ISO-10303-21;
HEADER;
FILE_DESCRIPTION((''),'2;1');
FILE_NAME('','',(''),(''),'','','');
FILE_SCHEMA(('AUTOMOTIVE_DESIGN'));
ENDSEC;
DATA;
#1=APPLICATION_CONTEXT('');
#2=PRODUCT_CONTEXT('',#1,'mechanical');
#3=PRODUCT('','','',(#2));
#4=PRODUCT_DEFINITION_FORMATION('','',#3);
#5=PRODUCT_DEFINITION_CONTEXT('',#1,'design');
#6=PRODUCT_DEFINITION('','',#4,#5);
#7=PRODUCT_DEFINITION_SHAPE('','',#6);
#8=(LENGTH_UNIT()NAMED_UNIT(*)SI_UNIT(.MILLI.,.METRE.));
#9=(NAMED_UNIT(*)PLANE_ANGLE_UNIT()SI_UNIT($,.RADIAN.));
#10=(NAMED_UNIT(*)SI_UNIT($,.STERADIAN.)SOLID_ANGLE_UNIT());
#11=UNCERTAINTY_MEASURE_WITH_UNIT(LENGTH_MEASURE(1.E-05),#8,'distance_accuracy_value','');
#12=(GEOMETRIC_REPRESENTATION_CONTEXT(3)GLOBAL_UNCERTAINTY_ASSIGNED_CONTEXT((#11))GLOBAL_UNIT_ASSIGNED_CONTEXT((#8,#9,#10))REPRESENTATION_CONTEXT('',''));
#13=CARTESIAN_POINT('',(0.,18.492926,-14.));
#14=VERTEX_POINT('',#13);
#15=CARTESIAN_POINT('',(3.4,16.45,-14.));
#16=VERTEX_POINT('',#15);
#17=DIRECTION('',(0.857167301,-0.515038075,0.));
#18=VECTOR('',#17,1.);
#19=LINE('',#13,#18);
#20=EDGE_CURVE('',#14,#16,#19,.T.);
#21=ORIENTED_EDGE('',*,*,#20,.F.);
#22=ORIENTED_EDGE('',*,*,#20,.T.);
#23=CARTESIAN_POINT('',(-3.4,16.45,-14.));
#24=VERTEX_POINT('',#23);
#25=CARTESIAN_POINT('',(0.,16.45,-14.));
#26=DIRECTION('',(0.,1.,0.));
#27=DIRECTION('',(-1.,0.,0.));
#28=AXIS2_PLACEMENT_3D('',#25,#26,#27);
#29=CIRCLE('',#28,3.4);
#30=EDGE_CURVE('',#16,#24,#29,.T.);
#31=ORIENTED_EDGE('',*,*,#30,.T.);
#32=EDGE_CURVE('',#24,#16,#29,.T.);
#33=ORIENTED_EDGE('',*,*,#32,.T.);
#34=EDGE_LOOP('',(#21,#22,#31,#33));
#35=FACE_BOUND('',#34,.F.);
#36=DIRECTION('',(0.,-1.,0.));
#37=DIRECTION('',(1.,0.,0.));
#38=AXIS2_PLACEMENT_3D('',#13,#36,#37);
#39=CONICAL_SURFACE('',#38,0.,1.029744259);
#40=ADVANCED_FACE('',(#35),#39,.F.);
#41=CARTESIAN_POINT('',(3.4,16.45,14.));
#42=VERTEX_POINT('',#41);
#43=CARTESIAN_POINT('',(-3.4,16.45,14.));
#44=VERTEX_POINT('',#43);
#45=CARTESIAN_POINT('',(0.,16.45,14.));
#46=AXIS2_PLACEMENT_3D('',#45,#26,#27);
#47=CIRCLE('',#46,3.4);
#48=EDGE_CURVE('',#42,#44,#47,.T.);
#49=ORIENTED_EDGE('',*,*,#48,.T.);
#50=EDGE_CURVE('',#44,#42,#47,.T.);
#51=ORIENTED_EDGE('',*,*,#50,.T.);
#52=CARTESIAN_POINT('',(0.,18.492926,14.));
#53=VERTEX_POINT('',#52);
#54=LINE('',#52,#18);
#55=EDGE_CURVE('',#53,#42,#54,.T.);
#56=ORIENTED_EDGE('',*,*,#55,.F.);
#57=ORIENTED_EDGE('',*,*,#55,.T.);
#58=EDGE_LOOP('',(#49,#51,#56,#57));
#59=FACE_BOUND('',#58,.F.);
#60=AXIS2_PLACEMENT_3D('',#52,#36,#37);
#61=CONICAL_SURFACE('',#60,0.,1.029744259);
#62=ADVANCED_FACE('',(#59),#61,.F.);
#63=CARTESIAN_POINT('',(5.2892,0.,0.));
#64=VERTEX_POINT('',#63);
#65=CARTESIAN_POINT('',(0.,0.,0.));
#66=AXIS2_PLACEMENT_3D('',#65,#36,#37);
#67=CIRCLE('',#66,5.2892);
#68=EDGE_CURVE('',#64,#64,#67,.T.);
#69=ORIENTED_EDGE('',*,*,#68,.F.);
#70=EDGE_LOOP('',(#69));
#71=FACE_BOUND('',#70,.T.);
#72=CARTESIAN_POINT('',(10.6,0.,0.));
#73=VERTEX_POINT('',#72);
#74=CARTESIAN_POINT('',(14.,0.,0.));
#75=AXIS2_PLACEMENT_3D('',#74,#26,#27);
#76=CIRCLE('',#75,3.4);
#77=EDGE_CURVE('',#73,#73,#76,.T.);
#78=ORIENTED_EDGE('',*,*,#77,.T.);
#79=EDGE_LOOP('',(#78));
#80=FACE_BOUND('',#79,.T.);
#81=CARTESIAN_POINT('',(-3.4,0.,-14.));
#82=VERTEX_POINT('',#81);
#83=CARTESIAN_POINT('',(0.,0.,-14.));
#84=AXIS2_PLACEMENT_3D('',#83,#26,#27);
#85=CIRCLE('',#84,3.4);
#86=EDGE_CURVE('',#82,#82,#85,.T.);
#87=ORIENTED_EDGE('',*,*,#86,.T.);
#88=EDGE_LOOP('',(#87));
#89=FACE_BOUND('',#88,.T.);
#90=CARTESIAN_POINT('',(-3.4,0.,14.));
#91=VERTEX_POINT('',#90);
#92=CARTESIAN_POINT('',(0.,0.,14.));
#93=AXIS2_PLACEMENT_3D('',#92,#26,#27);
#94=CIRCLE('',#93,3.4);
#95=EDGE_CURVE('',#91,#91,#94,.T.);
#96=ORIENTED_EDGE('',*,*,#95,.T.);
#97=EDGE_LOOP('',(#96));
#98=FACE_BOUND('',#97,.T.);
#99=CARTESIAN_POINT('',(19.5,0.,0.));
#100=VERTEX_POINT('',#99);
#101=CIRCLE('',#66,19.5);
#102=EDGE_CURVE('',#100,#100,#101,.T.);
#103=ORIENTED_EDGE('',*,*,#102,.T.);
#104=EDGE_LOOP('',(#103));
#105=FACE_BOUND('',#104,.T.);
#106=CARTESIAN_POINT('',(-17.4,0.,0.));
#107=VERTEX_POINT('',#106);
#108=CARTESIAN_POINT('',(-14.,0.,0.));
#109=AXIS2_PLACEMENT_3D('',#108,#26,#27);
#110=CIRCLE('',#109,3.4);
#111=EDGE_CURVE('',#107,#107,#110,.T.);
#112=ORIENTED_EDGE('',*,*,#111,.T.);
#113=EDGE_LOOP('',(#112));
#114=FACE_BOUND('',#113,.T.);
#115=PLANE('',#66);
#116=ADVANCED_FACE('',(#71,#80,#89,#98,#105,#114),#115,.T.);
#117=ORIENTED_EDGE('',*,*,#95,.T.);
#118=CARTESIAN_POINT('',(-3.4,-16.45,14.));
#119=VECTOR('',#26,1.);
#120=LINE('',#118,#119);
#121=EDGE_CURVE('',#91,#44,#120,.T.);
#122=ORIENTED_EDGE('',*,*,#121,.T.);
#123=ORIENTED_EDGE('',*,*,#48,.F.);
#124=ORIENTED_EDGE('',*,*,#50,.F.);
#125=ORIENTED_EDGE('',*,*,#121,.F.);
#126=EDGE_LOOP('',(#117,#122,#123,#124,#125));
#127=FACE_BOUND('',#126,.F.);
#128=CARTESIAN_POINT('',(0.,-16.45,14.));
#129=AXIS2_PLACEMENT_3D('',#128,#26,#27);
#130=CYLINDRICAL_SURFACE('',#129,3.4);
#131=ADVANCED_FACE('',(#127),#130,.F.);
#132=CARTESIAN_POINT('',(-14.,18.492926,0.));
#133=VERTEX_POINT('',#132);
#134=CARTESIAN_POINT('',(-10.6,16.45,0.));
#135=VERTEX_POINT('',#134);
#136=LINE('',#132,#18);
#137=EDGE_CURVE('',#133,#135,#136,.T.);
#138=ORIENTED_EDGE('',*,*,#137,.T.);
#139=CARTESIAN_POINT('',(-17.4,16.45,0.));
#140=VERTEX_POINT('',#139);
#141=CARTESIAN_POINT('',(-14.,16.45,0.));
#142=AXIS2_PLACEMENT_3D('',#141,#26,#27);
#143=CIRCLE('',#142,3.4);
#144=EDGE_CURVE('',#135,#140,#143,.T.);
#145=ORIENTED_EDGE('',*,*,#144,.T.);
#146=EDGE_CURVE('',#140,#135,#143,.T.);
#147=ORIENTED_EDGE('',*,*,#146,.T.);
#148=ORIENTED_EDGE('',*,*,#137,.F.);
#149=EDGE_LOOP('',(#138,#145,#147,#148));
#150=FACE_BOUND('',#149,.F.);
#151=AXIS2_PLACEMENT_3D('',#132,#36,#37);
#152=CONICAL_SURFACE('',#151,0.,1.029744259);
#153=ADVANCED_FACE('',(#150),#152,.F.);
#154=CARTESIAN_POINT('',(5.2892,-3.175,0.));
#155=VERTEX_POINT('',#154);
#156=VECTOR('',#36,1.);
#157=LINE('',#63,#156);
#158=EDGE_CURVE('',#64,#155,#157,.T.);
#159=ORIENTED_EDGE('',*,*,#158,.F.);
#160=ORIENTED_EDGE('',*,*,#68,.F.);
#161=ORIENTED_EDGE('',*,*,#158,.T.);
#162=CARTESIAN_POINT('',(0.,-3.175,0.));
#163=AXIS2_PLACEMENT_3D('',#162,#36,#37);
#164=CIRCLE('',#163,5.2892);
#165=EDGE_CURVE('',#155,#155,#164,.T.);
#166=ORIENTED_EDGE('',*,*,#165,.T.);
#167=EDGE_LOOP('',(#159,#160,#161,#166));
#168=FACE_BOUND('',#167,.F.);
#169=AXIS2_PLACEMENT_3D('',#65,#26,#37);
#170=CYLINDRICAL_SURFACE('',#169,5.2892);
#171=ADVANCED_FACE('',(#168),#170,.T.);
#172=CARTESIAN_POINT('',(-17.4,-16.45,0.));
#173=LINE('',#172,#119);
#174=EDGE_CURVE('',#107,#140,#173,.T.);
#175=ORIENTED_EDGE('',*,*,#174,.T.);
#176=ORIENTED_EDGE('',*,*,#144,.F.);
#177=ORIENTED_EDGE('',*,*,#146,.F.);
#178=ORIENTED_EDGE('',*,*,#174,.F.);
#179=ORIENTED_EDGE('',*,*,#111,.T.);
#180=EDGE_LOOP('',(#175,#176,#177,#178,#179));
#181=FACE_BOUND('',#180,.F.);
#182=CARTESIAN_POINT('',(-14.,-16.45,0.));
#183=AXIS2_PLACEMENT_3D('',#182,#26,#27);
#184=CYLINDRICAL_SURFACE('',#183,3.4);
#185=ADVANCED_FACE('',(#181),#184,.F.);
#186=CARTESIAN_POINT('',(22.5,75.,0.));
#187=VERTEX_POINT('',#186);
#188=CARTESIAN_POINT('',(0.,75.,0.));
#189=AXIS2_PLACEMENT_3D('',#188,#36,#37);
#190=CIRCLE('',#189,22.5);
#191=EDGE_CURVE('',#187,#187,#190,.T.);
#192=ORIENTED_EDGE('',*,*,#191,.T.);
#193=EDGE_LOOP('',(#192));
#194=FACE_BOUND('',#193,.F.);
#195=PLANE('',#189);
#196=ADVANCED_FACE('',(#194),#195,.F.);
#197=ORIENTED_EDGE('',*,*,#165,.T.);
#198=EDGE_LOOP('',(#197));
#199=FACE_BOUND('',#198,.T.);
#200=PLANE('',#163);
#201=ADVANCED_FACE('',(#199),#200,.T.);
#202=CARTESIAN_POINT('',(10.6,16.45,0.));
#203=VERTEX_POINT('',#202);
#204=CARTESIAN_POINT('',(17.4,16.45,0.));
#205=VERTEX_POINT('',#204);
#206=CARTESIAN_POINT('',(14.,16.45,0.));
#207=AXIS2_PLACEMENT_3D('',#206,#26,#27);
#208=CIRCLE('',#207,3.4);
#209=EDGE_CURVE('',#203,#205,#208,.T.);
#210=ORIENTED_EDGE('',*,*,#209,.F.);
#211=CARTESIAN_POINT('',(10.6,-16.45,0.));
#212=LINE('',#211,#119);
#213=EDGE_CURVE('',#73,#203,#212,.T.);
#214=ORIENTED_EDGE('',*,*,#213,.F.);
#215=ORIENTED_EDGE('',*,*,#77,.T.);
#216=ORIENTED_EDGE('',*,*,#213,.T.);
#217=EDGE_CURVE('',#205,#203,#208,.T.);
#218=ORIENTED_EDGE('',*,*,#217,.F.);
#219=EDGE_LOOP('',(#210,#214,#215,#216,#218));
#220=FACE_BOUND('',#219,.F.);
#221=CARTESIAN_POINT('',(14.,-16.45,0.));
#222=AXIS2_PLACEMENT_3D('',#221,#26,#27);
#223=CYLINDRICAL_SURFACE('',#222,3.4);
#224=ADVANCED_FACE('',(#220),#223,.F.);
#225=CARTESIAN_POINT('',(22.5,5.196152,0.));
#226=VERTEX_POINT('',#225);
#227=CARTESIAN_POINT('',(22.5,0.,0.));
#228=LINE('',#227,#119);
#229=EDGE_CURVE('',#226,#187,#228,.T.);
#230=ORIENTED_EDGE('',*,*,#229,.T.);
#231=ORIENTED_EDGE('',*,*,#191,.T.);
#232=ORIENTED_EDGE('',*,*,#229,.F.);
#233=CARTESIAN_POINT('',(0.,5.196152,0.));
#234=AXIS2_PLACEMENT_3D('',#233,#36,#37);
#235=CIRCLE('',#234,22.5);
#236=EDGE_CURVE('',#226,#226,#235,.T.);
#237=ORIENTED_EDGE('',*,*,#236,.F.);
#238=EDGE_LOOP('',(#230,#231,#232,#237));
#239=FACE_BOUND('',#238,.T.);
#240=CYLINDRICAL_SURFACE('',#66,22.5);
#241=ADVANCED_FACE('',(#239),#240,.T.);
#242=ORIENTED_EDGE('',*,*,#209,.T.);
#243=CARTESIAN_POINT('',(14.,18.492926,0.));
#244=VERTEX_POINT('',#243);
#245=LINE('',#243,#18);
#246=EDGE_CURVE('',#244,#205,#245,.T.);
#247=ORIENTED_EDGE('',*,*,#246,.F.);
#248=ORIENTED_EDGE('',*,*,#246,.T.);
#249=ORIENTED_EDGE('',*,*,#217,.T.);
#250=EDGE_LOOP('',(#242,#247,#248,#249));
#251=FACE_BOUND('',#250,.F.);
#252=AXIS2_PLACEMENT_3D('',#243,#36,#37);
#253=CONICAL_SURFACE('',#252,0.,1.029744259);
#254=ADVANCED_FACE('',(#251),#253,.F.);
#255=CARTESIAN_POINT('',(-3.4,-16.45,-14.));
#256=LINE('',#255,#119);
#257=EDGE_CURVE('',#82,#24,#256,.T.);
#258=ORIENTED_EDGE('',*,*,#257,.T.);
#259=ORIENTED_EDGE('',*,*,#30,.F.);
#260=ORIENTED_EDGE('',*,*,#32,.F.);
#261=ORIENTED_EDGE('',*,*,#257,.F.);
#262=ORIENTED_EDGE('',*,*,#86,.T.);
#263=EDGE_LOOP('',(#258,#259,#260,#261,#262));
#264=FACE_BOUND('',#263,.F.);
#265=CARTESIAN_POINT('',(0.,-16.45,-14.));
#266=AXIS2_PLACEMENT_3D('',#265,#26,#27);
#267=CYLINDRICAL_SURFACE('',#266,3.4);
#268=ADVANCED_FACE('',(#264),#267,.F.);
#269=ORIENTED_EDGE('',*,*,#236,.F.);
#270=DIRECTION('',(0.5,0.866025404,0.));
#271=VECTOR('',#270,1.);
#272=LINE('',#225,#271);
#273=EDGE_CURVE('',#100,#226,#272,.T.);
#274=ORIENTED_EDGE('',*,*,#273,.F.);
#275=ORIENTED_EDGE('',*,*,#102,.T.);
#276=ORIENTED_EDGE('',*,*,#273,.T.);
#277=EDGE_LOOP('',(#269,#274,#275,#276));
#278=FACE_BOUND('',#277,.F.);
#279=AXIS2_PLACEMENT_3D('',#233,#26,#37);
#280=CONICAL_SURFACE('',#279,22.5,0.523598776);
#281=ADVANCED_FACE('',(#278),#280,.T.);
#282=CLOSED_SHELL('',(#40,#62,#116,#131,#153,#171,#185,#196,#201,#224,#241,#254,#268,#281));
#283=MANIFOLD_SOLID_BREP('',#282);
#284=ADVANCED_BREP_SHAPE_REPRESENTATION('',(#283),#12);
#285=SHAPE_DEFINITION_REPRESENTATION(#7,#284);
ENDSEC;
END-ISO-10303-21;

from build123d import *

# Parameters (mm, degrees)
F0_R     = 22.5
F1_DEPTH = 75
F3_D     = 6.8
F3_DEPTH = 16.45
F3_TIP   = 2.0429261047
F4_R     = 5.2892002913
F5_DEPTH = 3.175
F6_SIZE2 = 5.1961524227
F6_SIZE  = 3


with BuildPart() as f1:
    # F0 (on Front) → F1 (new body)
    with BuildSketch(Plane.XZ):
        Circle(F0_R)
    extrude(amount=-F1_DEPTH)

    # F3
    with Locations(Plane.XZ):
        with Locations((0, -14), (14, 0), (0, 14), (-14, 0)):
            Hole(F3_D / 2, depth=F3_DEPTH)
            with Locations((0, 0, -(F3_DEPTH + F3_TIP / 2))):  # 118° drill point
                Cone(0, F3_D / 2, F3_TIP, mode=Mode.SUBTRACT)

    # F4 (on face) → F5 (join)
    with BuildSketch(Plane.XZ):
        Circle(F4_R)
    extrude(amount=F5_DEPTH)

    # F6
    f6_edges = [f1.edges().sort_by_distance(p)[0] for p in [
        (-22.5, 0, 0),
    ]]
    f6_side = f1.faces().sort_by_distance((-21.863604, 0, 0))[0]
    chamfer(f6_edges, length=F6_SIZE, length2=F6_SIZE2, reference=f6_side)


solid = f1.part
